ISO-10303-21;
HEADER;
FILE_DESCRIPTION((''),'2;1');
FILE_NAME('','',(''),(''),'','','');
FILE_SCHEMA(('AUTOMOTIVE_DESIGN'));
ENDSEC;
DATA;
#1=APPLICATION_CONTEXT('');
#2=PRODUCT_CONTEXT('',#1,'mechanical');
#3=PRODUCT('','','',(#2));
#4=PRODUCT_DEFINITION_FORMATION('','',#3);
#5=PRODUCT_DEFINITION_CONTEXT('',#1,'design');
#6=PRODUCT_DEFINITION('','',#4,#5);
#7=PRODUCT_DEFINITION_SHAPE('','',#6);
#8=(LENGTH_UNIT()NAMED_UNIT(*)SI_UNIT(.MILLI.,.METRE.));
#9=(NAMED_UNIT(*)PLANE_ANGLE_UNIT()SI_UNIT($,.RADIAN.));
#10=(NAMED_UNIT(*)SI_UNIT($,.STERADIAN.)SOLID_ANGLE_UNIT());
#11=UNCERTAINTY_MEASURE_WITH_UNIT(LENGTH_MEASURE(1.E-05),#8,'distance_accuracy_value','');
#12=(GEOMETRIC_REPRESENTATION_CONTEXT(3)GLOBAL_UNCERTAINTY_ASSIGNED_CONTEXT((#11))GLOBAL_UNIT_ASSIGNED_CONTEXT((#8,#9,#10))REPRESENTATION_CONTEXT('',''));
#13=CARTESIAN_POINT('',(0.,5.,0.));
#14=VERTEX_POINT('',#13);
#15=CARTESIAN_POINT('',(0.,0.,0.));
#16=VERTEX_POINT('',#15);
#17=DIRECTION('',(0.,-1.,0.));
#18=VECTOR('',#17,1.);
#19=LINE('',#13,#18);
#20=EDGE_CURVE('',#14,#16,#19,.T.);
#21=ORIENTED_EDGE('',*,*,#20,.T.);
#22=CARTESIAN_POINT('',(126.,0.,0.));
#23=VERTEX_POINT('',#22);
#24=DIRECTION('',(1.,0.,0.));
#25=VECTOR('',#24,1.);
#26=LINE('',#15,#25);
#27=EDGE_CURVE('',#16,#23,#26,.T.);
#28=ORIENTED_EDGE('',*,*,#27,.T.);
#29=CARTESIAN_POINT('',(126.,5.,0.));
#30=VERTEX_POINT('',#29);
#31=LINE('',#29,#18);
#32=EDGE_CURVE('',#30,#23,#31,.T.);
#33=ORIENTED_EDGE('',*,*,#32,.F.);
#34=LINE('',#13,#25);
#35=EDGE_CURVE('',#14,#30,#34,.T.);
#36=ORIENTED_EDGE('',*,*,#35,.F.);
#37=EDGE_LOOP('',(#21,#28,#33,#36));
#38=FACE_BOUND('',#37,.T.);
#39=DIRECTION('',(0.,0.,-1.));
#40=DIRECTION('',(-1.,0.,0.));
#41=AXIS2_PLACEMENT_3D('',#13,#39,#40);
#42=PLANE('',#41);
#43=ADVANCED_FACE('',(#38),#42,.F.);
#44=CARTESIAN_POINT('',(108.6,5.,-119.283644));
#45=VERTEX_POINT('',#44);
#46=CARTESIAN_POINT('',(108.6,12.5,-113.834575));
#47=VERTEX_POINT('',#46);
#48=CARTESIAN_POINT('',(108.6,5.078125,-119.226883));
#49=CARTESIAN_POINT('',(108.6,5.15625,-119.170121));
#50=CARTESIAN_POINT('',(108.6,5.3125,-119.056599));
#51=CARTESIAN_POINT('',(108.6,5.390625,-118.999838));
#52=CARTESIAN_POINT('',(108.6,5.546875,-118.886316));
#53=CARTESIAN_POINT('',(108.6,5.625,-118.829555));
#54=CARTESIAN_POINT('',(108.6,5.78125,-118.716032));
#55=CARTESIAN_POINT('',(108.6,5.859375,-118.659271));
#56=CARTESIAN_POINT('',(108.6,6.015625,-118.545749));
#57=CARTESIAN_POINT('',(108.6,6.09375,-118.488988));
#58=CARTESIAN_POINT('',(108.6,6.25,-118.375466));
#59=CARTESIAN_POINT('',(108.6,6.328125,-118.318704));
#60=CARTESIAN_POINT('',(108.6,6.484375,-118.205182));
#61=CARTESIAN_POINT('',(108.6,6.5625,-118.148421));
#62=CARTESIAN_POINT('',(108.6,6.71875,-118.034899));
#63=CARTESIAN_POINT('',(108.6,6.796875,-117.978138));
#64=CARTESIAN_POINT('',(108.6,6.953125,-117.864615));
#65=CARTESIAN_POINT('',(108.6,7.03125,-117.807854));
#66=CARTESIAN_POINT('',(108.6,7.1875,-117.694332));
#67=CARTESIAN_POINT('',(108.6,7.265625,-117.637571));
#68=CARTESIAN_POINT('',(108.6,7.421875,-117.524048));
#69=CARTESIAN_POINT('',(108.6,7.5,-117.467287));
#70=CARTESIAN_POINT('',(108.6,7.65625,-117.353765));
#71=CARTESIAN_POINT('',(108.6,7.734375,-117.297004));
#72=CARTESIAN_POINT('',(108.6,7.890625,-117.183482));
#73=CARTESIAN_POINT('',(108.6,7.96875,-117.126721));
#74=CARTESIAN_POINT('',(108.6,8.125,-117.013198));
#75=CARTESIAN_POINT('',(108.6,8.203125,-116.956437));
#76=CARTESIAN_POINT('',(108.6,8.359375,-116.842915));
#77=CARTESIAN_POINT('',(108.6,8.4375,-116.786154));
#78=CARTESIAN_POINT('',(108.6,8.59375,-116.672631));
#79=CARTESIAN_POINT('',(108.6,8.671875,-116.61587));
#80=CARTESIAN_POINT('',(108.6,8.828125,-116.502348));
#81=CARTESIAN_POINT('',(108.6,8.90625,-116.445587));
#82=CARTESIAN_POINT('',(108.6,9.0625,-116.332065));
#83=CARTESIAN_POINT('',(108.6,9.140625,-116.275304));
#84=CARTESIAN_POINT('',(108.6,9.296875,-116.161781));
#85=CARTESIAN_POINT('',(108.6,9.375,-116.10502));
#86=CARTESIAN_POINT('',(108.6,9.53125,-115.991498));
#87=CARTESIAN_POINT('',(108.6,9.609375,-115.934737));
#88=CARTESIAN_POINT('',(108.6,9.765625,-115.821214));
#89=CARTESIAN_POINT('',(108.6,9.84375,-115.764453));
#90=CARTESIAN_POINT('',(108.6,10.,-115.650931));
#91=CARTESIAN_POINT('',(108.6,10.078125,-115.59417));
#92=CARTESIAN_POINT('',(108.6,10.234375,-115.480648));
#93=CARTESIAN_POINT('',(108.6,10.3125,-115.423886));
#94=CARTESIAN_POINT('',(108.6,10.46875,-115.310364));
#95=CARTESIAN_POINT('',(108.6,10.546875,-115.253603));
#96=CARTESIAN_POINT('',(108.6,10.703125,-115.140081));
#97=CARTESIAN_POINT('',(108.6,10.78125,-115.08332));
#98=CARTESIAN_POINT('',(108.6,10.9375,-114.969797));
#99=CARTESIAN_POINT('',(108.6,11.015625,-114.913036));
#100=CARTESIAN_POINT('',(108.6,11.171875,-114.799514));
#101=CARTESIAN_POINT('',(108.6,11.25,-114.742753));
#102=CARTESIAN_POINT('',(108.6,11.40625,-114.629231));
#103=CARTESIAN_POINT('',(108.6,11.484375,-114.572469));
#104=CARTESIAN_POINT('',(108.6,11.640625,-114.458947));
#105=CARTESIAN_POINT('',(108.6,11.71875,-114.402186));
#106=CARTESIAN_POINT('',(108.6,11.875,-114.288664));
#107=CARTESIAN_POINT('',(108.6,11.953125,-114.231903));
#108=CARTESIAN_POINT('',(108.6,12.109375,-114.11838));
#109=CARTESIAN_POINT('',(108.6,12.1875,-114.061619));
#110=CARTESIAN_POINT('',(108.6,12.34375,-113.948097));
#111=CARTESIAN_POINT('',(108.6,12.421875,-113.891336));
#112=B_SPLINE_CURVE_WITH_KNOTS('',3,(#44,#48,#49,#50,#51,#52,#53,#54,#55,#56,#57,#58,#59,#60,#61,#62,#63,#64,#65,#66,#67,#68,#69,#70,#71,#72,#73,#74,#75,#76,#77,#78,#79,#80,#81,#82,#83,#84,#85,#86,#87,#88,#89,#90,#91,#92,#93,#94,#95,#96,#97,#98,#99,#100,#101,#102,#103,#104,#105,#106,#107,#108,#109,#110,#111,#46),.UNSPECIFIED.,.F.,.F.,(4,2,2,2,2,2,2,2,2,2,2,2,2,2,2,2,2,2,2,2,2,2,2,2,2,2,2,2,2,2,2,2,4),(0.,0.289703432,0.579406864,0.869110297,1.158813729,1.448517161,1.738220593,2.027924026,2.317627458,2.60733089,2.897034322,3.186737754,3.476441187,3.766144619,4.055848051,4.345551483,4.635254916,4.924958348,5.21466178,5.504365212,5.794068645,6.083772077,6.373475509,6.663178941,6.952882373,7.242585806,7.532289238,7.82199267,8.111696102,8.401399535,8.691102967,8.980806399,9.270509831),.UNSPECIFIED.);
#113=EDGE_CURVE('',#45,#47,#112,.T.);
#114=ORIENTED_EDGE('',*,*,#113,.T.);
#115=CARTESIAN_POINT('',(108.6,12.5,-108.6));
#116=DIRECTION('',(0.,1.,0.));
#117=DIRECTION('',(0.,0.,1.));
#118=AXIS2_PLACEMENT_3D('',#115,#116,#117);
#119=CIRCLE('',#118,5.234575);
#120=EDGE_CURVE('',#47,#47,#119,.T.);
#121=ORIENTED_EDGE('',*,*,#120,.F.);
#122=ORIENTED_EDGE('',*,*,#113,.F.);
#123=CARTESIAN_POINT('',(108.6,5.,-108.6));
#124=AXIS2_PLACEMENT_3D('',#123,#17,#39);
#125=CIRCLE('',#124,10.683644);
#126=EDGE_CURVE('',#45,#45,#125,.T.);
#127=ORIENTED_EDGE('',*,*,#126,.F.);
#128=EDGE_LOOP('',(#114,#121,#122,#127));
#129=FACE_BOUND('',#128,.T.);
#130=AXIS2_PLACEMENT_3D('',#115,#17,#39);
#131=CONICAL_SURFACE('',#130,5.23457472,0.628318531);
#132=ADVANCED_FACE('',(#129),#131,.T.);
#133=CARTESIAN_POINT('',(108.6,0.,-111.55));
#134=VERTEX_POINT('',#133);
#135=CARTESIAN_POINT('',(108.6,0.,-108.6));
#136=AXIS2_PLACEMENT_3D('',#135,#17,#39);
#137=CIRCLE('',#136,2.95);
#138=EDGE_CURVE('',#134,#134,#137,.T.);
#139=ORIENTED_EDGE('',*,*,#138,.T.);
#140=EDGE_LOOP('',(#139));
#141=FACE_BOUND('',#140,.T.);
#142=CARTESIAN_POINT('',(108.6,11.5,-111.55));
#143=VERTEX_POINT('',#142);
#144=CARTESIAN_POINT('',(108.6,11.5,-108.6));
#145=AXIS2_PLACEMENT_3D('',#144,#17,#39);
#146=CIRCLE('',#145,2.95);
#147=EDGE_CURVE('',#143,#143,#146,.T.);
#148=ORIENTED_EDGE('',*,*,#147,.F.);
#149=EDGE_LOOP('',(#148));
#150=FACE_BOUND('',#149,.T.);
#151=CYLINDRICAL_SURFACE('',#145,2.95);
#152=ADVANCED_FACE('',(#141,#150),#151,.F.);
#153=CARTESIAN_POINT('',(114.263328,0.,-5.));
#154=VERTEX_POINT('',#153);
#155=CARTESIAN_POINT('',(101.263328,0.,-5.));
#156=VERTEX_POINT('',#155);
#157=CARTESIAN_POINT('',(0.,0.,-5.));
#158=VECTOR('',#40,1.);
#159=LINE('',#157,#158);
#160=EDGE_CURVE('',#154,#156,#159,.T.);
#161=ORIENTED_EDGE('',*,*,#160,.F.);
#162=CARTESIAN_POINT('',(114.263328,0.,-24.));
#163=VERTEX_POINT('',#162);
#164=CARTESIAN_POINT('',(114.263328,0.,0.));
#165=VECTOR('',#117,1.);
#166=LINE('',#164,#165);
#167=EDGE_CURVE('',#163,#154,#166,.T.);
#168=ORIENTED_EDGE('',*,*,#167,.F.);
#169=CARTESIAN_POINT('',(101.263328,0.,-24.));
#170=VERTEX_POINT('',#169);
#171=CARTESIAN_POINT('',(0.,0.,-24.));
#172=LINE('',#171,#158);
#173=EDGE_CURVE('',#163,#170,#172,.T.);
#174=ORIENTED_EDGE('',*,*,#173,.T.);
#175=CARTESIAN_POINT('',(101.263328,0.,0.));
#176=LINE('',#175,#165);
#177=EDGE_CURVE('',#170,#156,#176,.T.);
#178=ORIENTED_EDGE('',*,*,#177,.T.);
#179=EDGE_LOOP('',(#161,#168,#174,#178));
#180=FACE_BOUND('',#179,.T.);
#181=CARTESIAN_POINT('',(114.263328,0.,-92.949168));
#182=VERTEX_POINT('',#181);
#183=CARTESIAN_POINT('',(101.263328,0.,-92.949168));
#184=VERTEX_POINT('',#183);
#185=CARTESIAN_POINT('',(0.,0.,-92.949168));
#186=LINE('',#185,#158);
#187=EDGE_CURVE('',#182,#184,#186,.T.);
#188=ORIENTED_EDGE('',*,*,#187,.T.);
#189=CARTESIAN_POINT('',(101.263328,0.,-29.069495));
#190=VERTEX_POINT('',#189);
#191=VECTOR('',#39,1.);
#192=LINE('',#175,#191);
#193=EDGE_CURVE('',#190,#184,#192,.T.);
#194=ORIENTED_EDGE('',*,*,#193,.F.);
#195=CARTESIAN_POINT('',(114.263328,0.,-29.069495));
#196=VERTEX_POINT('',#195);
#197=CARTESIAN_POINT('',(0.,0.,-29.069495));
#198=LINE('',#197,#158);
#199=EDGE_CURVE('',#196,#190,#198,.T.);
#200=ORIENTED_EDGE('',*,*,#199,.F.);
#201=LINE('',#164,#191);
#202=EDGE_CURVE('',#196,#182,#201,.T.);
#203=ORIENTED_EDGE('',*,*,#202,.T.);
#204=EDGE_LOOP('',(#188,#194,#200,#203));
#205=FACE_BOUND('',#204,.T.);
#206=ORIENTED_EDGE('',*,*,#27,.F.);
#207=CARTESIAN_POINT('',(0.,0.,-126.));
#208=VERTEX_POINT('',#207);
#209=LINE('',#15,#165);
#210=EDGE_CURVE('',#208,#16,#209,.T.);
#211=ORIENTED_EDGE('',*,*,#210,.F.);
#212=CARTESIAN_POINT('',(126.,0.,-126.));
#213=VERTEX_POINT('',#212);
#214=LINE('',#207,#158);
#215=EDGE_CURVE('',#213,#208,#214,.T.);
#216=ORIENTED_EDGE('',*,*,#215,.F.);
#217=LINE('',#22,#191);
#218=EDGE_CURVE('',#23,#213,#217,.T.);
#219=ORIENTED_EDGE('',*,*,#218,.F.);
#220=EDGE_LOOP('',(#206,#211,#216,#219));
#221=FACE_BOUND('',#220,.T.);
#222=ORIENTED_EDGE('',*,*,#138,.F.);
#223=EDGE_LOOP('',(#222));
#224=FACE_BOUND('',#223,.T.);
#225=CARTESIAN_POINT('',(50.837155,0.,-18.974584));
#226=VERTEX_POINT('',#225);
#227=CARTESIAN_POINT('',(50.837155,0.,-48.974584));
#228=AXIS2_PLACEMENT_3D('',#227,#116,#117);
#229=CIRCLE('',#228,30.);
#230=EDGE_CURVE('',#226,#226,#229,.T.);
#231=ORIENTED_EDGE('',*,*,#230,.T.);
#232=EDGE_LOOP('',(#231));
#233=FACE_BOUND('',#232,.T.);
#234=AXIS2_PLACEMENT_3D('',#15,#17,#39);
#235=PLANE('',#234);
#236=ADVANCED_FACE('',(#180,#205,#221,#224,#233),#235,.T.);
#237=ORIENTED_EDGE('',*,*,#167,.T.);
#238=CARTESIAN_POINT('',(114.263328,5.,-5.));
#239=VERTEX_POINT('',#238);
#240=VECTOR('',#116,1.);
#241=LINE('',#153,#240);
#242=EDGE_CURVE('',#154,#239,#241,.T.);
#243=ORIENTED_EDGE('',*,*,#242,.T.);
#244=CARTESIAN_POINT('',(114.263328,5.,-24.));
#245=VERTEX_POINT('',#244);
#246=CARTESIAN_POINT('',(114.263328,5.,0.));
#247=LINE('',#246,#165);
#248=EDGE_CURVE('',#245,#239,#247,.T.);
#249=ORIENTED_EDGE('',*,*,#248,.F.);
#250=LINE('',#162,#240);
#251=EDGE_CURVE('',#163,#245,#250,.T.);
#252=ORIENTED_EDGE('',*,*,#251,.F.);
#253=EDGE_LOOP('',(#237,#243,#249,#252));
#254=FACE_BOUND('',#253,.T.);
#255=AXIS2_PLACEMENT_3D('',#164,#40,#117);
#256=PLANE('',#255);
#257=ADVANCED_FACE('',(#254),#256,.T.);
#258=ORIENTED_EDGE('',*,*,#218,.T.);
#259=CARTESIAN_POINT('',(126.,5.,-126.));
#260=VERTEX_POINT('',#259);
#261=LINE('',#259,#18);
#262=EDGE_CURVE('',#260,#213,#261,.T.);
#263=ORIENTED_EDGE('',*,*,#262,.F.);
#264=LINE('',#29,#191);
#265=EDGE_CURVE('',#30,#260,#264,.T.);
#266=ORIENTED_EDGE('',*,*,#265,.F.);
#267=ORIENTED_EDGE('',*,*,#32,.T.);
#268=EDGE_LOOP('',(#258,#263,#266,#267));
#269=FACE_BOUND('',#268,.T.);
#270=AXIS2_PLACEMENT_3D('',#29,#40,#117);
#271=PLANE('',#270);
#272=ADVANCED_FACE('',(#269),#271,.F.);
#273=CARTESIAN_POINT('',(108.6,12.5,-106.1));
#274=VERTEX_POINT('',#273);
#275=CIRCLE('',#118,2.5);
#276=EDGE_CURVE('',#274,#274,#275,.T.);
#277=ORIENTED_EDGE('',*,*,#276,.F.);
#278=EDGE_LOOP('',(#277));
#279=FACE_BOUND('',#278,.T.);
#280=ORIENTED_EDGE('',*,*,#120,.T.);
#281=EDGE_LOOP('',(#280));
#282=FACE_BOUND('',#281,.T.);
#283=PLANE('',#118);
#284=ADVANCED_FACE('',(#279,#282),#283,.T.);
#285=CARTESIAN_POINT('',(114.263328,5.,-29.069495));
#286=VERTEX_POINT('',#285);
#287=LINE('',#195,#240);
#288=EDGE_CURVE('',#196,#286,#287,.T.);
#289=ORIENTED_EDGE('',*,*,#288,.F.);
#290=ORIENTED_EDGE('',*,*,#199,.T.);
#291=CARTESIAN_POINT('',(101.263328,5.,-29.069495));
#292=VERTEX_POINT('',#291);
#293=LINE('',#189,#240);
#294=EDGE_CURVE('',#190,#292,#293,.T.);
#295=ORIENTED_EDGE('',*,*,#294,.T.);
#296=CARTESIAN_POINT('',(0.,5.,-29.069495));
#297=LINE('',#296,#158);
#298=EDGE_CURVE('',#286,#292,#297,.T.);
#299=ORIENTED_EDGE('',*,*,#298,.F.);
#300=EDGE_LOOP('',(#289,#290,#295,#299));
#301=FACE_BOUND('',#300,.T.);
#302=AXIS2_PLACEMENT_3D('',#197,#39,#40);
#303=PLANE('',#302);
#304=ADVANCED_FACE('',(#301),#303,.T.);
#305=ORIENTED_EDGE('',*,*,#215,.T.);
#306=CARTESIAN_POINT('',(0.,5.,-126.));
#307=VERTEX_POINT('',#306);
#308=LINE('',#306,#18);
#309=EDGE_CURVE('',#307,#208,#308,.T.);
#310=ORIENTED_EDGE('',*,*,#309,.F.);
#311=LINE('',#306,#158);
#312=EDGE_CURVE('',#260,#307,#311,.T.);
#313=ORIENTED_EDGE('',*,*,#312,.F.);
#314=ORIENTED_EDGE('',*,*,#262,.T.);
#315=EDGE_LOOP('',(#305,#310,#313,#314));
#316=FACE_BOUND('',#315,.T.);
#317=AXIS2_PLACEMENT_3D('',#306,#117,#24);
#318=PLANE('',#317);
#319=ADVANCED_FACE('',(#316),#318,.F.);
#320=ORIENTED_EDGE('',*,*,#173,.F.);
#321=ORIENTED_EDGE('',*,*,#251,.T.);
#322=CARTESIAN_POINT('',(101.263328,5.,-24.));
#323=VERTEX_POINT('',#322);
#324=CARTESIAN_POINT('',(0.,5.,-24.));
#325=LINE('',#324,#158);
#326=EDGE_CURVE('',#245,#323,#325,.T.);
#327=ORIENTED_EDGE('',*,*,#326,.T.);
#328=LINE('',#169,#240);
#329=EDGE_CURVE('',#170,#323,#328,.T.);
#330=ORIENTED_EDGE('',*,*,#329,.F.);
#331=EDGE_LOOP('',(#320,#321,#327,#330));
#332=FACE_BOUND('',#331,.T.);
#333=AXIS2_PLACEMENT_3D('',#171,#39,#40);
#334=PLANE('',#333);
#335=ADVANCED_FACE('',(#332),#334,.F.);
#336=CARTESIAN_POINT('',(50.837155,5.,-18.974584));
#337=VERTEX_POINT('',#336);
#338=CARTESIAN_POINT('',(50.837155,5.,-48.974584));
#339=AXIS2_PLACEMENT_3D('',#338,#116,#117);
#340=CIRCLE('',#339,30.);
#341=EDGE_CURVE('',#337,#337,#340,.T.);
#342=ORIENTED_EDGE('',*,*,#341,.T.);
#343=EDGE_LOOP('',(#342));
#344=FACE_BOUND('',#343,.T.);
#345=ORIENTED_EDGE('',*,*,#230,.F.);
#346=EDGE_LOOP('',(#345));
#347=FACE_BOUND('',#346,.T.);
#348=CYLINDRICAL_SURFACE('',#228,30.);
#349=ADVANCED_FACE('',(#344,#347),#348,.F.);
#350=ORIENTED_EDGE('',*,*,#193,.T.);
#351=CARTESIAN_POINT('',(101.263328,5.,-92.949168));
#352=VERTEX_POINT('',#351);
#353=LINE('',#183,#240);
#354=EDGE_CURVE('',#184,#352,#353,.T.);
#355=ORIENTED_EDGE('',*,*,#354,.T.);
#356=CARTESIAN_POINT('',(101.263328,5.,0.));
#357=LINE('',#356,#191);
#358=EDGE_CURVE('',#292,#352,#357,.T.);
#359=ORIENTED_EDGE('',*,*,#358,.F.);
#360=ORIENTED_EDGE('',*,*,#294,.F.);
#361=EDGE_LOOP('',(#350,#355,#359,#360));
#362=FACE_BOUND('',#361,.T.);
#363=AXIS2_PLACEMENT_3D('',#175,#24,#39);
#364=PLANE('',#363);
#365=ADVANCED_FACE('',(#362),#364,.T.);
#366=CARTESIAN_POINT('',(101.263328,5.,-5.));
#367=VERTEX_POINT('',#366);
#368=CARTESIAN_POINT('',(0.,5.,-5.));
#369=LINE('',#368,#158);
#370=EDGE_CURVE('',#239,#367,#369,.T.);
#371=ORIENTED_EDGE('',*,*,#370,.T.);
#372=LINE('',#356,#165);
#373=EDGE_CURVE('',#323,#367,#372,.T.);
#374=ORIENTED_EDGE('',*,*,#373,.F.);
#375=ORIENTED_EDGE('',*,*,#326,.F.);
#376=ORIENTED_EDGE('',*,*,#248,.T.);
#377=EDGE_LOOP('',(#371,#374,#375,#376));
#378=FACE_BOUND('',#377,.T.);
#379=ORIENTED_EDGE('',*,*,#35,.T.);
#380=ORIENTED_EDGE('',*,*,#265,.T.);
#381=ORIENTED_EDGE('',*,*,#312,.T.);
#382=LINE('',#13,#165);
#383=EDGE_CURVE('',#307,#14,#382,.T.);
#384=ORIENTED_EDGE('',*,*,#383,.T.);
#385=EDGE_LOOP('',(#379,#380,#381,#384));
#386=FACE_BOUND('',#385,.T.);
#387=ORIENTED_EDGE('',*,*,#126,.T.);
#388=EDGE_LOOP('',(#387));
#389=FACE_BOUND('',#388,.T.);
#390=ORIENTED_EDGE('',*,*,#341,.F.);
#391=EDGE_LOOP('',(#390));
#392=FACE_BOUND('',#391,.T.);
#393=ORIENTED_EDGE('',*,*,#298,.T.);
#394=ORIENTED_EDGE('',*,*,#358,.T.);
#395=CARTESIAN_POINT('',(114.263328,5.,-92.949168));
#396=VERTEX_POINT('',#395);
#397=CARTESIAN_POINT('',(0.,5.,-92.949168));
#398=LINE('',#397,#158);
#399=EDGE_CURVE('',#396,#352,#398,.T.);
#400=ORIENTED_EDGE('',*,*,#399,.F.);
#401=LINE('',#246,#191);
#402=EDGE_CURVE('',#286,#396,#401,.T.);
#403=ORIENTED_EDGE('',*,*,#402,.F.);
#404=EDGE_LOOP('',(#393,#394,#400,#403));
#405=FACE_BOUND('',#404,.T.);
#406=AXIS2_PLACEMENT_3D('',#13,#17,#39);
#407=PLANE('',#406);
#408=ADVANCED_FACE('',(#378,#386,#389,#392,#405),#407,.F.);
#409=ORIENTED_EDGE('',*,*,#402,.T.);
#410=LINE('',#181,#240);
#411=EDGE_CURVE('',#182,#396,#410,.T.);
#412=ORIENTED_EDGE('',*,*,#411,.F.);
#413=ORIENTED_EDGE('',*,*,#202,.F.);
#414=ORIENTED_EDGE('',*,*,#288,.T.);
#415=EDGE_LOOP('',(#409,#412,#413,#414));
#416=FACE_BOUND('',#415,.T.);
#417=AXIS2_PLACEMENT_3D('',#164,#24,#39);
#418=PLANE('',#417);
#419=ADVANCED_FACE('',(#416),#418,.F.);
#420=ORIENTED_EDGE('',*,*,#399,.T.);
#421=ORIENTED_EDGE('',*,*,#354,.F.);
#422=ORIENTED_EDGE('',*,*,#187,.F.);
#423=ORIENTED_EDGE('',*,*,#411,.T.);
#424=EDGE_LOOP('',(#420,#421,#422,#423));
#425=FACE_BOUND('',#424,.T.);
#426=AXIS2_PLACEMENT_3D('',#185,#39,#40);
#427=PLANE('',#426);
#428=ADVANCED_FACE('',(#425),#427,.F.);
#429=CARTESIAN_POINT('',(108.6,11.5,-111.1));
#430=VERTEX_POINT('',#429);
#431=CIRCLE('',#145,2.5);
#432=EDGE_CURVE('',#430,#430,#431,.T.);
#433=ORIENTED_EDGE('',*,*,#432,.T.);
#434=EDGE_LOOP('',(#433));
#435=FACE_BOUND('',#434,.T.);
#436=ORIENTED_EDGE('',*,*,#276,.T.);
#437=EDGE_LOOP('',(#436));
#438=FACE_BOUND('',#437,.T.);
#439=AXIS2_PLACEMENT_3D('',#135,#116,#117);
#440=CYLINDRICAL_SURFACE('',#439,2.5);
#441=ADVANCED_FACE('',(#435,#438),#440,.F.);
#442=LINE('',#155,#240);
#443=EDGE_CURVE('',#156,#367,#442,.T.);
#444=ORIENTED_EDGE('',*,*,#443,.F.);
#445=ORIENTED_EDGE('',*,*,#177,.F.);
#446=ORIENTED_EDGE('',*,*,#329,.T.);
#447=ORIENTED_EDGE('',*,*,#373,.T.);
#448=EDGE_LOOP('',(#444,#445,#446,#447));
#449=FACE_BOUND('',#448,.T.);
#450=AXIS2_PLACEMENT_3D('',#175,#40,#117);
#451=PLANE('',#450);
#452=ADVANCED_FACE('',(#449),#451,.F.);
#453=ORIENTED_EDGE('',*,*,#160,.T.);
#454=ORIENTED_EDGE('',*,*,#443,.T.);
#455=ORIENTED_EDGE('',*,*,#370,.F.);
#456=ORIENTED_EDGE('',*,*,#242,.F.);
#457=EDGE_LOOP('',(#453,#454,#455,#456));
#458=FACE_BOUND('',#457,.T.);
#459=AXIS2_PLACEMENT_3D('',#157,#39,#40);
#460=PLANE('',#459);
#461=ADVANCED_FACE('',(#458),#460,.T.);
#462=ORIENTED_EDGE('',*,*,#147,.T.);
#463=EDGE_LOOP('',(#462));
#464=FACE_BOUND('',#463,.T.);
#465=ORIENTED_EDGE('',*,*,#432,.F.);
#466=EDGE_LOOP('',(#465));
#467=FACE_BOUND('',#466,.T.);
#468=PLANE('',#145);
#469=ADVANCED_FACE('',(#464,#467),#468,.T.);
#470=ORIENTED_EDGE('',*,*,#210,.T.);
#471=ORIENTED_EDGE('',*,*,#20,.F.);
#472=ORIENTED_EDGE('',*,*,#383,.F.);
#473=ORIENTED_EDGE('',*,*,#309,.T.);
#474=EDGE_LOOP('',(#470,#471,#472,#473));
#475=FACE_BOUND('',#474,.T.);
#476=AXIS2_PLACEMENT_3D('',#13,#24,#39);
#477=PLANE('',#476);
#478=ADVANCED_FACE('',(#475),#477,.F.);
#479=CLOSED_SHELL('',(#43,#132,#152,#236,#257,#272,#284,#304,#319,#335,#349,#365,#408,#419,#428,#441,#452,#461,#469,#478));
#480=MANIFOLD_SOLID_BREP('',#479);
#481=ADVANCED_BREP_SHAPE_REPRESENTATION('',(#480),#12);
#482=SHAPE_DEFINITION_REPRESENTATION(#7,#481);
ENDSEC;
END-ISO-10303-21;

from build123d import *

# Parameters (mm, degrees)
SKETCH1_W           = 126
SKETCH1_H           = 126
BOSS_EXTRUDE1_DEPTH = 5
SKETCH3_R           = 12.5
BOSS_EXTRUDE2_DEPTH = 7.5
SKETCH4_R           = 2.95
CUT_EXTRUDE1_DEPTH  = 11.5
SKETCH6_R           = 2.5
CUT_EXTRUDE2_DEPTH  = 179.628805068
CHAMFER1_SIZE       = 10
CHAMFER1_SIZE_2     = 7.26542528
SKETCH8_W           = 13
SKETCH8_H           = 63.879672954
SKETCH8_H_2         = 19
CUT_EXTRUDE3_DEPTH  = 179.348675353
SKETCH9_R           = 30
CUT_EXTRUDE4_DEPTH  = 179.348675353


with BuildPart() as part:
    # Sketch1 → Boss-Extrude1 (new body)
    with BuildSketch(Plane(origin=(0, 0, 0), x_dir=(1, 0, 0), z_dir=(0, 1, 0))):
        with Locations((63, 63)):
            Rectangle(SKETCH1_W, SKETCH1_H)
    extrude(amount=BOSS_EXTRUDE1_DEPTH)

    # Sketch3 → Boss-Extrude2 (add)
    with BuildSketch(Plane(origin=(0, 5, 0), x_dir=(1, 0, 0), z_dir=(0, 1, 0))):
        with Locations(Location((108.6, 108.6, 0), (0, 0, 90))):
            Circle(SKETCH3_R)
    extrude(amount=BOSS_EXTRUDE2_DEPTH)

    # Sketch4 → Cut-Extrude1 (cut)
    with BuildSketch(Plane.XZ):
        with Locations(Location((108.6, -108.6, 0), (0, 0, 270))):
            Circle(SKETCH4_R)
    extrude(amount=-CUT_EXTRUDE1_DEPTH, mode=Mode.SUBTRACT)

    # Sketch6 → Cut-Extrude2 (cut, through all)
    with BuildSketch(Plane(origin=(0, 12.5, 0), x_dir=(1, 0, 0), z_dir=(0, 1, 0))):
        with Locations(Location((108.6, 108.6, 0), (0, 0, 270))):
            Circle(SKETCH6_R)
    extrude(amount=-CUT_EXTRUDE2_DEPTH, mode=Mode.SUBTRACT)

    # Chamfer1
    # the kernel refuses this chamfer: 10, 7.26542528 mm, written as the material it takes off along each edge
    with BuildSketch(Plane(origin=(108.6, 12.5, -108.6), x_dir=(0, 0, -1), z_dir=(1, 0, 0))) as chamfer1_piece_1_section:
        Polygon((12.5, -CHAMFER1_SIZE), (12.5 - CHAMFER1_SIZE_2, 0), (12.5, 0), align=None)
    chamfer1_piece_1 = revolve(axis=Axis((108.6, 12.5, -108.6), (0, 1, 0)), mode=Mode.PRIVATE)
    chamfer1_piece_1 = split(chamfer1_piece_1, bisect_by=Plane(origin=(108.6, 5, -100.650989912), z_dir=(0, 1, 0)), keep=Keep.TOP, mode=Mode.PRIVATE)
    add(chamfer1_piece_1, mode=Mode.SUBTRACT)

    # Sketch8 → Cut-Extrude3 (cut, through all)
    with BuildSketch(Plane(origin=(0, 5, 0), x_dir=(1, 0, 0), z_dir=(0, 1, 0))):
        with Locations((107.763328316, 61.0093315)):
            Rectangle(SKETCH8_W, SKETCH8_H)
        with Locations((107.763328316, 14.5)):
            Rectangle(SKETCH8_W, SKETCH8_H_2)
    extrude(amount=-CUT_EXTRUDE3_DEPTH, mode=Mode.SUBTRACT)

    # Sketch9 → Cut-Extrude4 (cut, through all)
    with BuildSketch(Plane(origin=(0, 5, 0), x_dir=(1, 0, 0), z_dir=(0, 1, 0))):
        with Locations(Location((50.837155032, 48.974583989, 0), (0, 0, 270))):
            Circle(SKETCH9_R)
    extrude(amount=-CUT_EXTRUDE4_DEPTH, mode=Mode.SUBTRACT)


solid = part.part
